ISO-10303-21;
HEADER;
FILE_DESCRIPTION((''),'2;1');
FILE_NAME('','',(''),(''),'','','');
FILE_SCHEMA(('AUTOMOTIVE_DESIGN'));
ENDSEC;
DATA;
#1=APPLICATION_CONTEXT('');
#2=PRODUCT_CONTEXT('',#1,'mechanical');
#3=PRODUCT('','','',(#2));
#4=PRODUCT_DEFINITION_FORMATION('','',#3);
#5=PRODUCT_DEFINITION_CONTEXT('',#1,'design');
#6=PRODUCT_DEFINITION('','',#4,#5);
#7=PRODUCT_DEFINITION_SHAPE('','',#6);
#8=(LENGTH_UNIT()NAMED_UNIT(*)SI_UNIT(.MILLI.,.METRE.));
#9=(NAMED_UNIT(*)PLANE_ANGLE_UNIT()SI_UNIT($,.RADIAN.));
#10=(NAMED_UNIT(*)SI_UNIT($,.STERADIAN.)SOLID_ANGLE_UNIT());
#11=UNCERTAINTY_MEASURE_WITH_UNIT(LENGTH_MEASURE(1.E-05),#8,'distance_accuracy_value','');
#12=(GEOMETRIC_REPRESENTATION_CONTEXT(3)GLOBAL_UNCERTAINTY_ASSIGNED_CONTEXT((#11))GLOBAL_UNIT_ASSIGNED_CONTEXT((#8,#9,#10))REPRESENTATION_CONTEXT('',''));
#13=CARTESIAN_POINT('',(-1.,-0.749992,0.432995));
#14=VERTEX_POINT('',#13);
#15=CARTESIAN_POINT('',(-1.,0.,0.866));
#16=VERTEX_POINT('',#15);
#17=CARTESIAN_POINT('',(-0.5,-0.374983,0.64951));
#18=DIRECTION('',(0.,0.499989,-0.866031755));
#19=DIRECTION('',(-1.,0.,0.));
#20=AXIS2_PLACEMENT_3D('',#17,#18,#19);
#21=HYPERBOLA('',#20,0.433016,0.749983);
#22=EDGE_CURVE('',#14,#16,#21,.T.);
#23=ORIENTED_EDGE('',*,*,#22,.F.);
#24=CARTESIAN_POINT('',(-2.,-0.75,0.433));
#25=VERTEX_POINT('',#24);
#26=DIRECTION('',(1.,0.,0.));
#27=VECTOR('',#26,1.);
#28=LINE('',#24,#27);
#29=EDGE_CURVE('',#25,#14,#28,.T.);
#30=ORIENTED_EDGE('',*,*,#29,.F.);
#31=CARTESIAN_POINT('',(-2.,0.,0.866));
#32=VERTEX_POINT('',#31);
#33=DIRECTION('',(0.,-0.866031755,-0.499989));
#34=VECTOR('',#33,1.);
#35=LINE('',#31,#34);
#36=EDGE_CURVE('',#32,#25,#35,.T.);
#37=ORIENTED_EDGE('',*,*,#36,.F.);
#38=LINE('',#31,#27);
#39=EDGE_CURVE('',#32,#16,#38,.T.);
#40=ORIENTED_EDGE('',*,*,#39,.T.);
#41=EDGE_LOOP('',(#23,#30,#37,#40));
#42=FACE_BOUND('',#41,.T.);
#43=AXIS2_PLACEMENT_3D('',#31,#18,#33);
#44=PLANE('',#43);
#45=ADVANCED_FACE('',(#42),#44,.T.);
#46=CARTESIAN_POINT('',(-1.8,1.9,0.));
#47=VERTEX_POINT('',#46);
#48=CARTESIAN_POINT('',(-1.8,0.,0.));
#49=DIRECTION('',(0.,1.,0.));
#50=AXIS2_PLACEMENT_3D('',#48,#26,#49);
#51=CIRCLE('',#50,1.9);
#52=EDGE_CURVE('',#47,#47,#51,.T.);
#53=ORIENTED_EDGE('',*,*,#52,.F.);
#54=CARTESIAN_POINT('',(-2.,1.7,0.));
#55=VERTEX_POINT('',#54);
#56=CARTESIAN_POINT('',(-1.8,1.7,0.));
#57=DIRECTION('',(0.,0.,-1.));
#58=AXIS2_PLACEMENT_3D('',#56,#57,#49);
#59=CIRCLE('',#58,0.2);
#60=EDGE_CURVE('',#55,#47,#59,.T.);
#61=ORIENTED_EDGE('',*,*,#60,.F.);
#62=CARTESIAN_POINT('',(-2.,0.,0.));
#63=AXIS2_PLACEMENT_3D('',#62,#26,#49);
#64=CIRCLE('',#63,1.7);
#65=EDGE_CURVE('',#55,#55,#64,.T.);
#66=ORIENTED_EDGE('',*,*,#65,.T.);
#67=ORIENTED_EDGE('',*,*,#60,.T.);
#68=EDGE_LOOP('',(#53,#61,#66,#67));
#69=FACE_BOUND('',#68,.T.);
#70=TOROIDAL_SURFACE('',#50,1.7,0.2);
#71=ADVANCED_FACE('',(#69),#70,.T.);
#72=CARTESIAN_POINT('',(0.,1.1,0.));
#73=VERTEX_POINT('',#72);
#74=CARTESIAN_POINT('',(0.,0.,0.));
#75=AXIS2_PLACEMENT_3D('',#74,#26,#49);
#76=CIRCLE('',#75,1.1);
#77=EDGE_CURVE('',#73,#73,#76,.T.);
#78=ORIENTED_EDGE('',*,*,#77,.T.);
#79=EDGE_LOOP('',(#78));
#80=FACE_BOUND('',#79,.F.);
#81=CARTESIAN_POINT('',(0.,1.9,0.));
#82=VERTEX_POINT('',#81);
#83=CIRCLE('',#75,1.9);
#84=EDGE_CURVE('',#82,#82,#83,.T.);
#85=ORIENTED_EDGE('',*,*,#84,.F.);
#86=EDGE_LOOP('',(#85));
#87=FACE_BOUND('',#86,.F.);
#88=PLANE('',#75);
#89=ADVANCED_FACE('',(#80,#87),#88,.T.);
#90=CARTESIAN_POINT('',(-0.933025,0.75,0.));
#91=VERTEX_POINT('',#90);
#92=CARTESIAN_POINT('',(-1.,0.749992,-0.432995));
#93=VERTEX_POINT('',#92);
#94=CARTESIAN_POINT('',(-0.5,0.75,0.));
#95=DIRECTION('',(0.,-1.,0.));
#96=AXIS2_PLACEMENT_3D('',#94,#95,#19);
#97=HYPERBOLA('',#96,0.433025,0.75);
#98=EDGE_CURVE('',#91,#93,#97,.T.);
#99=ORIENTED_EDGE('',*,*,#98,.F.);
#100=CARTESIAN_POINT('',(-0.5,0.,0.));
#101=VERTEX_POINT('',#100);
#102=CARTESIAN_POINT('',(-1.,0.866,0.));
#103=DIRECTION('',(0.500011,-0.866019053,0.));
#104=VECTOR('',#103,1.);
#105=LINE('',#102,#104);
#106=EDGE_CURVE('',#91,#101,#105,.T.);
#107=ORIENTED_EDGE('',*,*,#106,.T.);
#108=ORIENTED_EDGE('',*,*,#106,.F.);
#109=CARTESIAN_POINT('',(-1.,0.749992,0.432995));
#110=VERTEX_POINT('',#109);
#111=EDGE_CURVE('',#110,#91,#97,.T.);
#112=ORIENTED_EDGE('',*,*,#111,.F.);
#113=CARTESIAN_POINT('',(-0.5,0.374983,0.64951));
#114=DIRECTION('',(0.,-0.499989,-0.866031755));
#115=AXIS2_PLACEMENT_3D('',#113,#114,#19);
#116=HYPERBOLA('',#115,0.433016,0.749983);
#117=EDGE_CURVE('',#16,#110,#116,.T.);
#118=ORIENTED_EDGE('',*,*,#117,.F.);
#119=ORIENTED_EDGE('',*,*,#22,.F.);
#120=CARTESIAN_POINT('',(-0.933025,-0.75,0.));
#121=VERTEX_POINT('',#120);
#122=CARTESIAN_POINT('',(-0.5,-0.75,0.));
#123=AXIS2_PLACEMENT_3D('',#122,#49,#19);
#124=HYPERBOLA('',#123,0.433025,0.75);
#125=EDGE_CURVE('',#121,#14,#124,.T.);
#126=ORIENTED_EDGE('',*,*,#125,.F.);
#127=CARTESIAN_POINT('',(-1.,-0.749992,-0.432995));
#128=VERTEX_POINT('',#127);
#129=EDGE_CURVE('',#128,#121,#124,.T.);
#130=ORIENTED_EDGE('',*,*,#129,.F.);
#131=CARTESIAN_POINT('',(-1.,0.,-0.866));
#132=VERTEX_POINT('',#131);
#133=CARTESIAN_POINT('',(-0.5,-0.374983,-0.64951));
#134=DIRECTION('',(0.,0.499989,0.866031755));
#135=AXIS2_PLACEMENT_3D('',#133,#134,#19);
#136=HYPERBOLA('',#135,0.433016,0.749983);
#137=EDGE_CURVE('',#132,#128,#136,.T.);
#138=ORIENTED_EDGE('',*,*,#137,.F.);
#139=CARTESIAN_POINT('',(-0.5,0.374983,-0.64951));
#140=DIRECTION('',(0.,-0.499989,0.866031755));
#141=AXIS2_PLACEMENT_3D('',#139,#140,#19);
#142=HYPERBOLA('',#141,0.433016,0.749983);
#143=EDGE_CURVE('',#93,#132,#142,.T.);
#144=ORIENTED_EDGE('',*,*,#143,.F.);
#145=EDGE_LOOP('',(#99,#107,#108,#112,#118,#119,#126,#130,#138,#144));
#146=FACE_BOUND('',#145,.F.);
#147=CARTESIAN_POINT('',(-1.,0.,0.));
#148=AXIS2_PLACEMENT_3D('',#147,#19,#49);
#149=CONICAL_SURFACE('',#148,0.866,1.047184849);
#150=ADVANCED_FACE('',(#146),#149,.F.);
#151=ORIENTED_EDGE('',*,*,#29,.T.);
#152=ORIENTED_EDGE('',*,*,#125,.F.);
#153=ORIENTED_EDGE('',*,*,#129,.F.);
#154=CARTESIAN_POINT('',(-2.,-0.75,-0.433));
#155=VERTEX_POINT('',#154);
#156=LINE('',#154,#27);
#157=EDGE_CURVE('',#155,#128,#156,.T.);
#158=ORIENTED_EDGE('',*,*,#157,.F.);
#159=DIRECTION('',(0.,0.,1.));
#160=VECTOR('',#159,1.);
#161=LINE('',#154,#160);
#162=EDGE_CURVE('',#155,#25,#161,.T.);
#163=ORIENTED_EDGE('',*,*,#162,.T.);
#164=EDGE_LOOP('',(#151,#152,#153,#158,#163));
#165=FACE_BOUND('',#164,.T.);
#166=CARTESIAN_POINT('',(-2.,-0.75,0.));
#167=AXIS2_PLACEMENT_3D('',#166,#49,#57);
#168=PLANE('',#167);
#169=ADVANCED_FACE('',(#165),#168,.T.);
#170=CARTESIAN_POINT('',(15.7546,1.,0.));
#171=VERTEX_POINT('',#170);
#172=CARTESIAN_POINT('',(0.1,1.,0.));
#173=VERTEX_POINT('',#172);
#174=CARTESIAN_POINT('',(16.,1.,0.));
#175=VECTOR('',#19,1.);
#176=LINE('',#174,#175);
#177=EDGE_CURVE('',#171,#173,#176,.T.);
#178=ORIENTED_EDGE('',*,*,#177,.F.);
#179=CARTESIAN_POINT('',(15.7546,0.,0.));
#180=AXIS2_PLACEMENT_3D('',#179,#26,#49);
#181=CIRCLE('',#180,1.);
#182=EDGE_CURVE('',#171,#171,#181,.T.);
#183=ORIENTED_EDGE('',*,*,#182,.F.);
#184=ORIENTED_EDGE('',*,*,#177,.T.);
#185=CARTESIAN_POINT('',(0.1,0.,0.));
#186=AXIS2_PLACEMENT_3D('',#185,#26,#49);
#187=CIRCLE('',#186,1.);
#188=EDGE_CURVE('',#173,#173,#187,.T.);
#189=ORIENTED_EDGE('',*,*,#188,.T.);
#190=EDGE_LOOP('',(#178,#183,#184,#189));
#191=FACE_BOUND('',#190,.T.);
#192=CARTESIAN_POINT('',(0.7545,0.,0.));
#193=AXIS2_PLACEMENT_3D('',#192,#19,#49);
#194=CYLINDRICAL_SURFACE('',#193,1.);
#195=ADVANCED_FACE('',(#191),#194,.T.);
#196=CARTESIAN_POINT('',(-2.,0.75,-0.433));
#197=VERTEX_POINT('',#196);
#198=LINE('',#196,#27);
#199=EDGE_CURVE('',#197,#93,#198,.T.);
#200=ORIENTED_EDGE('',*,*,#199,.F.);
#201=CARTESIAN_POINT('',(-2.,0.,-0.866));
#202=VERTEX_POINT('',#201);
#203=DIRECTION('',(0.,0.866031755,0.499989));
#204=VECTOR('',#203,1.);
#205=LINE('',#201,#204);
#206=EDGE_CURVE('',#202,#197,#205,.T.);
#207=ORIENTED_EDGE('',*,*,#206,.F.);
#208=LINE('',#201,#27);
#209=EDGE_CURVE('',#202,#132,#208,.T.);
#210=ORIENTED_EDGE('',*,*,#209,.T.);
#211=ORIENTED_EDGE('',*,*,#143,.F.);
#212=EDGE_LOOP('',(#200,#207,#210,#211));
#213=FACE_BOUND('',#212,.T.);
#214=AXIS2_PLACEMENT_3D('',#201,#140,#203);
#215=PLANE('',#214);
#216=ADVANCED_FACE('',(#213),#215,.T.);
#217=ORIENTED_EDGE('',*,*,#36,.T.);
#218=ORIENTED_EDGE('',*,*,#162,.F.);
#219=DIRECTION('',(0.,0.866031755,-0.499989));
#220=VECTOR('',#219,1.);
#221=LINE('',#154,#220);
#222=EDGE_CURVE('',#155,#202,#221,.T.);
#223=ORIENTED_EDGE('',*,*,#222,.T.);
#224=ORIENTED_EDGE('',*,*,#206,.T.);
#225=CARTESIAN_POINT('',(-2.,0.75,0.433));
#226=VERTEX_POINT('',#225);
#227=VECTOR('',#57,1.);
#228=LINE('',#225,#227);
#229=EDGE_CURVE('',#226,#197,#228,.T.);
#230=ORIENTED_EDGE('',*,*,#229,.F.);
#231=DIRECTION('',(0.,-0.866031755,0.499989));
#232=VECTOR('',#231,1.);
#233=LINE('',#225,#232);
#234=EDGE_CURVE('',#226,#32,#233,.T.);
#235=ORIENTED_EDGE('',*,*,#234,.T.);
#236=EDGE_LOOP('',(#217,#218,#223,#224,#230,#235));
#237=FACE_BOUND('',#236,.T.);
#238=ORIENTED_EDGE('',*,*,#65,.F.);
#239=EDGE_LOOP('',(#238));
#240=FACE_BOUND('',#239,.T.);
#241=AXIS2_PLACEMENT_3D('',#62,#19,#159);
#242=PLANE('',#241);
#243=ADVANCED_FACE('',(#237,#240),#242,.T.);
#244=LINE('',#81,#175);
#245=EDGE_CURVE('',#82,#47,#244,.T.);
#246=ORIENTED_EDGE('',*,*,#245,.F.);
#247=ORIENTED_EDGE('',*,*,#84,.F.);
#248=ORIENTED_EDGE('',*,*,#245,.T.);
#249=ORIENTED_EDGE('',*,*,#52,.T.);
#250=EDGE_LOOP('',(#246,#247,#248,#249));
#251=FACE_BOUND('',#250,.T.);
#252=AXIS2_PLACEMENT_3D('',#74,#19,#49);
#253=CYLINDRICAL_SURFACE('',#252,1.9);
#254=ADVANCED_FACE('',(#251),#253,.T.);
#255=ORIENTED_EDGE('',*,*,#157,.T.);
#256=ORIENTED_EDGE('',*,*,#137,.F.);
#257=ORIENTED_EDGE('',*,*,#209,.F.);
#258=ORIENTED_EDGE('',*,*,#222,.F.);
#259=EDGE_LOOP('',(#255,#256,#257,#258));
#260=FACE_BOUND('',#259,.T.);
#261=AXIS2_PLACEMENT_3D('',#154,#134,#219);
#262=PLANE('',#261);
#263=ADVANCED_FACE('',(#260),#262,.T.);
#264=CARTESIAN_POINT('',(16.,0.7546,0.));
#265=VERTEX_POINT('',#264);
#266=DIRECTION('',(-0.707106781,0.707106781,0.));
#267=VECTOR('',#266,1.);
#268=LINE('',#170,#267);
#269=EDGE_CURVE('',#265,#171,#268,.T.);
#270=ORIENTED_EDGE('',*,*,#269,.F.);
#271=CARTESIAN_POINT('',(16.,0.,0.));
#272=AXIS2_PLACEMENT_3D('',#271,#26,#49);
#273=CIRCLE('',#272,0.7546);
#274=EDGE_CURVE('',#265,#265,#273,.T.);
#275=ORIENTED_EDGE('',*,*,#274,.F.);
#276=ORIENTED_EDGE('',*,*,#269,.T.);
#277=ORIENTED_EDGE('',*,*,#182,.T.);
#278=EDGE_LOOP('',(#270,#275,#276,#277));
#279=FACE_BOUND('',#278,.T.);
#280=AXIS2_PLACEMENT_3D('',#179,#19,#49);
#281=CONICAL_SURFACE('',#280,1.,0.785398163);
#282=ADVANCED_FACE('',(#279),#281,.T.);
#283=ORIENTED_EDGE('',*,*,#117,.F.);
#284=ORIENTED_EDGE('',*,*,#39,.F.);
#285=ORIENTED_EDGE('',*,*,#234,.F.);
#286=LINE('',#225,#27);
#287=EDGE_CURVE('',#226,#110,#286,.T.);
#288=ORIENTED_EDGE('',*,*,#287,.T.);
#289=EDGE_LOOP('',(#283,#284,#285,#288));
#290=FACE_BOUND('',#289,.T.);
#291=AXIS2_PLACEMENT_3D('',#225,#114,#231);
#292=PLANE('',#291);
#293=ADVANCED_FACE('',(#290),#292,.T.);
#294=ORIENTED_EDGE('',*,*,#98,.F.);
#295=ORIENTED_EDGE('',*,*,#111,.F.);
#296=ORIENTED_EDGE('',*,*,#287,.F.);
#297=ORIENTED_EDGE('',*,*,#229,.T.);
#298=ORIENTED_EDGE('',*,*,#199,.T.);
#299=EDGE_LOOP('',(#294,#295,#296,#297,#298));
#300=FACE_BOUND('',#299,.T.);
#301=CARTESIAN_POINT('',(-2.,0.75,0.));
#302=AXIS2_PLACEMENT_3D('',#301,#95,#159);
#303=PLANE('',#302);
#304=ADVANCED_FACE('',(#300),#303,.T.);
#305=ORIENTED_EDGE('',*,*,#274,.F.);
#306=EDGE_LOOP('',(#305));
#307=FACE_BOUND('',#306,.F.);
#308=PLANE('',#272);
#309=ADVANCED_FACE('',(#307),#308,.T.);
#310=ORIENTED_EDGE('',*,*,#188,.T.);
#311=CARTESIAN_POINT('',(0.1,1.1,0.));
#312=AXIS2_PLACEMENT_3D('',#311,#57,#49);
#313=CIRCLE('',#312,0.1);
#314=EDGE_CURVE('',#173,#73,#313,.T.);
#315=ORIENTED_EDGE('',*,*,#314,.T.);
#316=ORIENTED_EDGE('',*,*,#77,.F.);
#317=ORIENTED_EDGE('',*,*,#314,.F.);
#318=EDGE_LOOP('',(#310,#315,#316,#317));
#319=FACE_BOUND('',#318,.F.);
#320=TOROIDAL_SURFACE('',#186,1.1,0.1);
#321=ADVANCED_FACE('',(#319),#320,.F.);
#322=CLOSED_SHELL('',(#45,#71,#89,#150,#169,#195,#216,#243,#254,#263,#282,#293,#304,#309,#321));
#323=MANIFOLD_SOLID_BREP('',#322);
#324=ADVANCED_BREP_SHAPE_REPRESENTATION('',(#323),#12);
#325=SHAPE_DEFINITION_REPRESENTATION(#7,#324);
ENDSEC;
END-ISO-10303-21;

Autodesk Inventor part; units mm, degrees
ref_plane "YZ Plane" through (0, 0, 0) normal (1, 0, 0) x (0, 1, 0)
ref_plane "XZ Plane" through (0, 0, 0) normal (0, 1, 0) x (-1, 0, 0)
sketch "Skizze1" plane through (0, 0, 0) normal (0, 0, 1) x (1, 0, 0)
  line L0 (-0.5, 0) -> (16, 0)
  line L1 (16, 0) -> (16, 1)
  line L2 (16, 1) -> (1, 1)
  line L3 (1, 1) -> (0.7545, 1)
  line L4 (0.7545, 1) -> (0, 1)
  line L5 (0, 1) -> (0, 1.9)
  line L6 (0, 1.9) -> (-2, 1.9)
  line L7 (-2, 1.9) -> (-2, 0.866)
  line L8 (-2, 0.866) -> (-1, 0.866)
  line L9 (-1, 0.866) -> (-0.5, 0)
  line L10 (-5.6, 0) -> (19.6, 0) projected
  line L11 (0, -0.38) -> (0, 2.28) projected
  line L12 (1, 1) -> (0, 1) construction
  dimension "d1" = 15
  dimension "d2" = 0.2455
  dimension "d3" = 2
  dimension "d4" = 1
  dimension "d5" = 60
  dimension "d6" = 2
  dimension "d7" = 2
  dimension "d8" = 1.7321
  dimension "d9" = 3.8
  dimension "d26" = 16
revolve "Körper" add sketch "Skizze1" angle 360 about axis through (-0.5, 0, 0) along (1, 0, 0)
sketch "Skizze2" plane through (-2, 0, 0) normal (-1, 0, 0) x (0, 0, 1)
  circle A0 centre (0, 0) radius 0.866 projected
  line L0 (0, -2.66) -> (0, 2.66) projected
  line L1 (-2.66, 0) -> (2.66, 0) projected
  line L2 (0.866, 0) -> (0.433, -0.75)
  line L3 (0.433, -0.75) -> (-0.433, -0.75)
  line L4 (-0.433, -0.75) -> (-0.866, 0)
  line L5 (-0.866, 0) -> (-0.433, 0.75)
  line L6 (-0.433, 0.75) -> (0.433, 0.75)
  line L7 (0.433, 0.75) -> (0.866, 0)
  point P0 (0, 0)
extrude "Loch" add sketch "Skizze2" against normal up to next contours L7 A0 | A0 L2 | L6 L0 A0 | A0 L0 L3 | L0 L6 A0 | A0 L3 L0 | L4 A0 | A0 L5
fillet "Rundung1" radius 0.2 1 edges at (-2, -1.9, 0)
thread "Gewinde" size "M2x0.4" class "6g" standard "ISO Metric profile" length 15
chamfer "Fase1" distance 0.2454 distance2 0.2454 1 edges at (16, -1, 0) measured on face at (16, -0.5786, -0.2558)
ref_plane "Work Plane1" through (29, 0, 0) normal (0, -1, 0) x (1, 0, 0)
fillet "Fillet2" radius 0.1 1 edges at (0, -1, 0)
equation "\"d1\" = GEL"
equation "\"d3\" = KOH"
equation "\"d4\" = INTI"
equation "\"d6\" = GD"
equation "\"d7\" = BDM"
equation "\"d8\" = 1.1547 * SW"
equation "\"d9\" = KOD"
equation "\"d26\" = NLG"
equation "\"d30\" = R"
equation "\"d17\" = RR"
equation "\"d13\" = GEL"
equation "\"d15\" = -0.5 * SPD + 0.5 * GD"
equation "\"d16\" = GUL"
equation "\"GD\" = NND"
equation "\"NLG\" = 16"
equation "\"GEL\" = 15"
equation "\"KOD\" = 3.8"
equation "\"KOH\" = 2"
equation "\"INTI\" = 1"
equation "\"GAL\" = 0.61345 * PTC"
equation "\"GUL\" = 0.61345 * PTC"
equation "\"BDM\" = NND"
equation "\"SW\" = 1.5"
equation "\"RR\" = 0.2"
equation "\"SPD\" = NND - 1.2269 * PTC"
equation "\"R\" = 0.1"
equation "\"TOA\" = 30deg"
equation "\"GD1\" = THREADDIA - 1.2269 * PTC"
equation "\"THREADDIA\" = 2"
equation "\"FAWI\" = 45deg"
equation "\"ANG\" = 120deg"
equation "\"PTC\" = 0.4"
equation "\"NND\" = 2"
equation "\"E0\" = 1.155 * SW"
properties part number "DIN 912 - M2 x 16" material "Stahl, weich"
